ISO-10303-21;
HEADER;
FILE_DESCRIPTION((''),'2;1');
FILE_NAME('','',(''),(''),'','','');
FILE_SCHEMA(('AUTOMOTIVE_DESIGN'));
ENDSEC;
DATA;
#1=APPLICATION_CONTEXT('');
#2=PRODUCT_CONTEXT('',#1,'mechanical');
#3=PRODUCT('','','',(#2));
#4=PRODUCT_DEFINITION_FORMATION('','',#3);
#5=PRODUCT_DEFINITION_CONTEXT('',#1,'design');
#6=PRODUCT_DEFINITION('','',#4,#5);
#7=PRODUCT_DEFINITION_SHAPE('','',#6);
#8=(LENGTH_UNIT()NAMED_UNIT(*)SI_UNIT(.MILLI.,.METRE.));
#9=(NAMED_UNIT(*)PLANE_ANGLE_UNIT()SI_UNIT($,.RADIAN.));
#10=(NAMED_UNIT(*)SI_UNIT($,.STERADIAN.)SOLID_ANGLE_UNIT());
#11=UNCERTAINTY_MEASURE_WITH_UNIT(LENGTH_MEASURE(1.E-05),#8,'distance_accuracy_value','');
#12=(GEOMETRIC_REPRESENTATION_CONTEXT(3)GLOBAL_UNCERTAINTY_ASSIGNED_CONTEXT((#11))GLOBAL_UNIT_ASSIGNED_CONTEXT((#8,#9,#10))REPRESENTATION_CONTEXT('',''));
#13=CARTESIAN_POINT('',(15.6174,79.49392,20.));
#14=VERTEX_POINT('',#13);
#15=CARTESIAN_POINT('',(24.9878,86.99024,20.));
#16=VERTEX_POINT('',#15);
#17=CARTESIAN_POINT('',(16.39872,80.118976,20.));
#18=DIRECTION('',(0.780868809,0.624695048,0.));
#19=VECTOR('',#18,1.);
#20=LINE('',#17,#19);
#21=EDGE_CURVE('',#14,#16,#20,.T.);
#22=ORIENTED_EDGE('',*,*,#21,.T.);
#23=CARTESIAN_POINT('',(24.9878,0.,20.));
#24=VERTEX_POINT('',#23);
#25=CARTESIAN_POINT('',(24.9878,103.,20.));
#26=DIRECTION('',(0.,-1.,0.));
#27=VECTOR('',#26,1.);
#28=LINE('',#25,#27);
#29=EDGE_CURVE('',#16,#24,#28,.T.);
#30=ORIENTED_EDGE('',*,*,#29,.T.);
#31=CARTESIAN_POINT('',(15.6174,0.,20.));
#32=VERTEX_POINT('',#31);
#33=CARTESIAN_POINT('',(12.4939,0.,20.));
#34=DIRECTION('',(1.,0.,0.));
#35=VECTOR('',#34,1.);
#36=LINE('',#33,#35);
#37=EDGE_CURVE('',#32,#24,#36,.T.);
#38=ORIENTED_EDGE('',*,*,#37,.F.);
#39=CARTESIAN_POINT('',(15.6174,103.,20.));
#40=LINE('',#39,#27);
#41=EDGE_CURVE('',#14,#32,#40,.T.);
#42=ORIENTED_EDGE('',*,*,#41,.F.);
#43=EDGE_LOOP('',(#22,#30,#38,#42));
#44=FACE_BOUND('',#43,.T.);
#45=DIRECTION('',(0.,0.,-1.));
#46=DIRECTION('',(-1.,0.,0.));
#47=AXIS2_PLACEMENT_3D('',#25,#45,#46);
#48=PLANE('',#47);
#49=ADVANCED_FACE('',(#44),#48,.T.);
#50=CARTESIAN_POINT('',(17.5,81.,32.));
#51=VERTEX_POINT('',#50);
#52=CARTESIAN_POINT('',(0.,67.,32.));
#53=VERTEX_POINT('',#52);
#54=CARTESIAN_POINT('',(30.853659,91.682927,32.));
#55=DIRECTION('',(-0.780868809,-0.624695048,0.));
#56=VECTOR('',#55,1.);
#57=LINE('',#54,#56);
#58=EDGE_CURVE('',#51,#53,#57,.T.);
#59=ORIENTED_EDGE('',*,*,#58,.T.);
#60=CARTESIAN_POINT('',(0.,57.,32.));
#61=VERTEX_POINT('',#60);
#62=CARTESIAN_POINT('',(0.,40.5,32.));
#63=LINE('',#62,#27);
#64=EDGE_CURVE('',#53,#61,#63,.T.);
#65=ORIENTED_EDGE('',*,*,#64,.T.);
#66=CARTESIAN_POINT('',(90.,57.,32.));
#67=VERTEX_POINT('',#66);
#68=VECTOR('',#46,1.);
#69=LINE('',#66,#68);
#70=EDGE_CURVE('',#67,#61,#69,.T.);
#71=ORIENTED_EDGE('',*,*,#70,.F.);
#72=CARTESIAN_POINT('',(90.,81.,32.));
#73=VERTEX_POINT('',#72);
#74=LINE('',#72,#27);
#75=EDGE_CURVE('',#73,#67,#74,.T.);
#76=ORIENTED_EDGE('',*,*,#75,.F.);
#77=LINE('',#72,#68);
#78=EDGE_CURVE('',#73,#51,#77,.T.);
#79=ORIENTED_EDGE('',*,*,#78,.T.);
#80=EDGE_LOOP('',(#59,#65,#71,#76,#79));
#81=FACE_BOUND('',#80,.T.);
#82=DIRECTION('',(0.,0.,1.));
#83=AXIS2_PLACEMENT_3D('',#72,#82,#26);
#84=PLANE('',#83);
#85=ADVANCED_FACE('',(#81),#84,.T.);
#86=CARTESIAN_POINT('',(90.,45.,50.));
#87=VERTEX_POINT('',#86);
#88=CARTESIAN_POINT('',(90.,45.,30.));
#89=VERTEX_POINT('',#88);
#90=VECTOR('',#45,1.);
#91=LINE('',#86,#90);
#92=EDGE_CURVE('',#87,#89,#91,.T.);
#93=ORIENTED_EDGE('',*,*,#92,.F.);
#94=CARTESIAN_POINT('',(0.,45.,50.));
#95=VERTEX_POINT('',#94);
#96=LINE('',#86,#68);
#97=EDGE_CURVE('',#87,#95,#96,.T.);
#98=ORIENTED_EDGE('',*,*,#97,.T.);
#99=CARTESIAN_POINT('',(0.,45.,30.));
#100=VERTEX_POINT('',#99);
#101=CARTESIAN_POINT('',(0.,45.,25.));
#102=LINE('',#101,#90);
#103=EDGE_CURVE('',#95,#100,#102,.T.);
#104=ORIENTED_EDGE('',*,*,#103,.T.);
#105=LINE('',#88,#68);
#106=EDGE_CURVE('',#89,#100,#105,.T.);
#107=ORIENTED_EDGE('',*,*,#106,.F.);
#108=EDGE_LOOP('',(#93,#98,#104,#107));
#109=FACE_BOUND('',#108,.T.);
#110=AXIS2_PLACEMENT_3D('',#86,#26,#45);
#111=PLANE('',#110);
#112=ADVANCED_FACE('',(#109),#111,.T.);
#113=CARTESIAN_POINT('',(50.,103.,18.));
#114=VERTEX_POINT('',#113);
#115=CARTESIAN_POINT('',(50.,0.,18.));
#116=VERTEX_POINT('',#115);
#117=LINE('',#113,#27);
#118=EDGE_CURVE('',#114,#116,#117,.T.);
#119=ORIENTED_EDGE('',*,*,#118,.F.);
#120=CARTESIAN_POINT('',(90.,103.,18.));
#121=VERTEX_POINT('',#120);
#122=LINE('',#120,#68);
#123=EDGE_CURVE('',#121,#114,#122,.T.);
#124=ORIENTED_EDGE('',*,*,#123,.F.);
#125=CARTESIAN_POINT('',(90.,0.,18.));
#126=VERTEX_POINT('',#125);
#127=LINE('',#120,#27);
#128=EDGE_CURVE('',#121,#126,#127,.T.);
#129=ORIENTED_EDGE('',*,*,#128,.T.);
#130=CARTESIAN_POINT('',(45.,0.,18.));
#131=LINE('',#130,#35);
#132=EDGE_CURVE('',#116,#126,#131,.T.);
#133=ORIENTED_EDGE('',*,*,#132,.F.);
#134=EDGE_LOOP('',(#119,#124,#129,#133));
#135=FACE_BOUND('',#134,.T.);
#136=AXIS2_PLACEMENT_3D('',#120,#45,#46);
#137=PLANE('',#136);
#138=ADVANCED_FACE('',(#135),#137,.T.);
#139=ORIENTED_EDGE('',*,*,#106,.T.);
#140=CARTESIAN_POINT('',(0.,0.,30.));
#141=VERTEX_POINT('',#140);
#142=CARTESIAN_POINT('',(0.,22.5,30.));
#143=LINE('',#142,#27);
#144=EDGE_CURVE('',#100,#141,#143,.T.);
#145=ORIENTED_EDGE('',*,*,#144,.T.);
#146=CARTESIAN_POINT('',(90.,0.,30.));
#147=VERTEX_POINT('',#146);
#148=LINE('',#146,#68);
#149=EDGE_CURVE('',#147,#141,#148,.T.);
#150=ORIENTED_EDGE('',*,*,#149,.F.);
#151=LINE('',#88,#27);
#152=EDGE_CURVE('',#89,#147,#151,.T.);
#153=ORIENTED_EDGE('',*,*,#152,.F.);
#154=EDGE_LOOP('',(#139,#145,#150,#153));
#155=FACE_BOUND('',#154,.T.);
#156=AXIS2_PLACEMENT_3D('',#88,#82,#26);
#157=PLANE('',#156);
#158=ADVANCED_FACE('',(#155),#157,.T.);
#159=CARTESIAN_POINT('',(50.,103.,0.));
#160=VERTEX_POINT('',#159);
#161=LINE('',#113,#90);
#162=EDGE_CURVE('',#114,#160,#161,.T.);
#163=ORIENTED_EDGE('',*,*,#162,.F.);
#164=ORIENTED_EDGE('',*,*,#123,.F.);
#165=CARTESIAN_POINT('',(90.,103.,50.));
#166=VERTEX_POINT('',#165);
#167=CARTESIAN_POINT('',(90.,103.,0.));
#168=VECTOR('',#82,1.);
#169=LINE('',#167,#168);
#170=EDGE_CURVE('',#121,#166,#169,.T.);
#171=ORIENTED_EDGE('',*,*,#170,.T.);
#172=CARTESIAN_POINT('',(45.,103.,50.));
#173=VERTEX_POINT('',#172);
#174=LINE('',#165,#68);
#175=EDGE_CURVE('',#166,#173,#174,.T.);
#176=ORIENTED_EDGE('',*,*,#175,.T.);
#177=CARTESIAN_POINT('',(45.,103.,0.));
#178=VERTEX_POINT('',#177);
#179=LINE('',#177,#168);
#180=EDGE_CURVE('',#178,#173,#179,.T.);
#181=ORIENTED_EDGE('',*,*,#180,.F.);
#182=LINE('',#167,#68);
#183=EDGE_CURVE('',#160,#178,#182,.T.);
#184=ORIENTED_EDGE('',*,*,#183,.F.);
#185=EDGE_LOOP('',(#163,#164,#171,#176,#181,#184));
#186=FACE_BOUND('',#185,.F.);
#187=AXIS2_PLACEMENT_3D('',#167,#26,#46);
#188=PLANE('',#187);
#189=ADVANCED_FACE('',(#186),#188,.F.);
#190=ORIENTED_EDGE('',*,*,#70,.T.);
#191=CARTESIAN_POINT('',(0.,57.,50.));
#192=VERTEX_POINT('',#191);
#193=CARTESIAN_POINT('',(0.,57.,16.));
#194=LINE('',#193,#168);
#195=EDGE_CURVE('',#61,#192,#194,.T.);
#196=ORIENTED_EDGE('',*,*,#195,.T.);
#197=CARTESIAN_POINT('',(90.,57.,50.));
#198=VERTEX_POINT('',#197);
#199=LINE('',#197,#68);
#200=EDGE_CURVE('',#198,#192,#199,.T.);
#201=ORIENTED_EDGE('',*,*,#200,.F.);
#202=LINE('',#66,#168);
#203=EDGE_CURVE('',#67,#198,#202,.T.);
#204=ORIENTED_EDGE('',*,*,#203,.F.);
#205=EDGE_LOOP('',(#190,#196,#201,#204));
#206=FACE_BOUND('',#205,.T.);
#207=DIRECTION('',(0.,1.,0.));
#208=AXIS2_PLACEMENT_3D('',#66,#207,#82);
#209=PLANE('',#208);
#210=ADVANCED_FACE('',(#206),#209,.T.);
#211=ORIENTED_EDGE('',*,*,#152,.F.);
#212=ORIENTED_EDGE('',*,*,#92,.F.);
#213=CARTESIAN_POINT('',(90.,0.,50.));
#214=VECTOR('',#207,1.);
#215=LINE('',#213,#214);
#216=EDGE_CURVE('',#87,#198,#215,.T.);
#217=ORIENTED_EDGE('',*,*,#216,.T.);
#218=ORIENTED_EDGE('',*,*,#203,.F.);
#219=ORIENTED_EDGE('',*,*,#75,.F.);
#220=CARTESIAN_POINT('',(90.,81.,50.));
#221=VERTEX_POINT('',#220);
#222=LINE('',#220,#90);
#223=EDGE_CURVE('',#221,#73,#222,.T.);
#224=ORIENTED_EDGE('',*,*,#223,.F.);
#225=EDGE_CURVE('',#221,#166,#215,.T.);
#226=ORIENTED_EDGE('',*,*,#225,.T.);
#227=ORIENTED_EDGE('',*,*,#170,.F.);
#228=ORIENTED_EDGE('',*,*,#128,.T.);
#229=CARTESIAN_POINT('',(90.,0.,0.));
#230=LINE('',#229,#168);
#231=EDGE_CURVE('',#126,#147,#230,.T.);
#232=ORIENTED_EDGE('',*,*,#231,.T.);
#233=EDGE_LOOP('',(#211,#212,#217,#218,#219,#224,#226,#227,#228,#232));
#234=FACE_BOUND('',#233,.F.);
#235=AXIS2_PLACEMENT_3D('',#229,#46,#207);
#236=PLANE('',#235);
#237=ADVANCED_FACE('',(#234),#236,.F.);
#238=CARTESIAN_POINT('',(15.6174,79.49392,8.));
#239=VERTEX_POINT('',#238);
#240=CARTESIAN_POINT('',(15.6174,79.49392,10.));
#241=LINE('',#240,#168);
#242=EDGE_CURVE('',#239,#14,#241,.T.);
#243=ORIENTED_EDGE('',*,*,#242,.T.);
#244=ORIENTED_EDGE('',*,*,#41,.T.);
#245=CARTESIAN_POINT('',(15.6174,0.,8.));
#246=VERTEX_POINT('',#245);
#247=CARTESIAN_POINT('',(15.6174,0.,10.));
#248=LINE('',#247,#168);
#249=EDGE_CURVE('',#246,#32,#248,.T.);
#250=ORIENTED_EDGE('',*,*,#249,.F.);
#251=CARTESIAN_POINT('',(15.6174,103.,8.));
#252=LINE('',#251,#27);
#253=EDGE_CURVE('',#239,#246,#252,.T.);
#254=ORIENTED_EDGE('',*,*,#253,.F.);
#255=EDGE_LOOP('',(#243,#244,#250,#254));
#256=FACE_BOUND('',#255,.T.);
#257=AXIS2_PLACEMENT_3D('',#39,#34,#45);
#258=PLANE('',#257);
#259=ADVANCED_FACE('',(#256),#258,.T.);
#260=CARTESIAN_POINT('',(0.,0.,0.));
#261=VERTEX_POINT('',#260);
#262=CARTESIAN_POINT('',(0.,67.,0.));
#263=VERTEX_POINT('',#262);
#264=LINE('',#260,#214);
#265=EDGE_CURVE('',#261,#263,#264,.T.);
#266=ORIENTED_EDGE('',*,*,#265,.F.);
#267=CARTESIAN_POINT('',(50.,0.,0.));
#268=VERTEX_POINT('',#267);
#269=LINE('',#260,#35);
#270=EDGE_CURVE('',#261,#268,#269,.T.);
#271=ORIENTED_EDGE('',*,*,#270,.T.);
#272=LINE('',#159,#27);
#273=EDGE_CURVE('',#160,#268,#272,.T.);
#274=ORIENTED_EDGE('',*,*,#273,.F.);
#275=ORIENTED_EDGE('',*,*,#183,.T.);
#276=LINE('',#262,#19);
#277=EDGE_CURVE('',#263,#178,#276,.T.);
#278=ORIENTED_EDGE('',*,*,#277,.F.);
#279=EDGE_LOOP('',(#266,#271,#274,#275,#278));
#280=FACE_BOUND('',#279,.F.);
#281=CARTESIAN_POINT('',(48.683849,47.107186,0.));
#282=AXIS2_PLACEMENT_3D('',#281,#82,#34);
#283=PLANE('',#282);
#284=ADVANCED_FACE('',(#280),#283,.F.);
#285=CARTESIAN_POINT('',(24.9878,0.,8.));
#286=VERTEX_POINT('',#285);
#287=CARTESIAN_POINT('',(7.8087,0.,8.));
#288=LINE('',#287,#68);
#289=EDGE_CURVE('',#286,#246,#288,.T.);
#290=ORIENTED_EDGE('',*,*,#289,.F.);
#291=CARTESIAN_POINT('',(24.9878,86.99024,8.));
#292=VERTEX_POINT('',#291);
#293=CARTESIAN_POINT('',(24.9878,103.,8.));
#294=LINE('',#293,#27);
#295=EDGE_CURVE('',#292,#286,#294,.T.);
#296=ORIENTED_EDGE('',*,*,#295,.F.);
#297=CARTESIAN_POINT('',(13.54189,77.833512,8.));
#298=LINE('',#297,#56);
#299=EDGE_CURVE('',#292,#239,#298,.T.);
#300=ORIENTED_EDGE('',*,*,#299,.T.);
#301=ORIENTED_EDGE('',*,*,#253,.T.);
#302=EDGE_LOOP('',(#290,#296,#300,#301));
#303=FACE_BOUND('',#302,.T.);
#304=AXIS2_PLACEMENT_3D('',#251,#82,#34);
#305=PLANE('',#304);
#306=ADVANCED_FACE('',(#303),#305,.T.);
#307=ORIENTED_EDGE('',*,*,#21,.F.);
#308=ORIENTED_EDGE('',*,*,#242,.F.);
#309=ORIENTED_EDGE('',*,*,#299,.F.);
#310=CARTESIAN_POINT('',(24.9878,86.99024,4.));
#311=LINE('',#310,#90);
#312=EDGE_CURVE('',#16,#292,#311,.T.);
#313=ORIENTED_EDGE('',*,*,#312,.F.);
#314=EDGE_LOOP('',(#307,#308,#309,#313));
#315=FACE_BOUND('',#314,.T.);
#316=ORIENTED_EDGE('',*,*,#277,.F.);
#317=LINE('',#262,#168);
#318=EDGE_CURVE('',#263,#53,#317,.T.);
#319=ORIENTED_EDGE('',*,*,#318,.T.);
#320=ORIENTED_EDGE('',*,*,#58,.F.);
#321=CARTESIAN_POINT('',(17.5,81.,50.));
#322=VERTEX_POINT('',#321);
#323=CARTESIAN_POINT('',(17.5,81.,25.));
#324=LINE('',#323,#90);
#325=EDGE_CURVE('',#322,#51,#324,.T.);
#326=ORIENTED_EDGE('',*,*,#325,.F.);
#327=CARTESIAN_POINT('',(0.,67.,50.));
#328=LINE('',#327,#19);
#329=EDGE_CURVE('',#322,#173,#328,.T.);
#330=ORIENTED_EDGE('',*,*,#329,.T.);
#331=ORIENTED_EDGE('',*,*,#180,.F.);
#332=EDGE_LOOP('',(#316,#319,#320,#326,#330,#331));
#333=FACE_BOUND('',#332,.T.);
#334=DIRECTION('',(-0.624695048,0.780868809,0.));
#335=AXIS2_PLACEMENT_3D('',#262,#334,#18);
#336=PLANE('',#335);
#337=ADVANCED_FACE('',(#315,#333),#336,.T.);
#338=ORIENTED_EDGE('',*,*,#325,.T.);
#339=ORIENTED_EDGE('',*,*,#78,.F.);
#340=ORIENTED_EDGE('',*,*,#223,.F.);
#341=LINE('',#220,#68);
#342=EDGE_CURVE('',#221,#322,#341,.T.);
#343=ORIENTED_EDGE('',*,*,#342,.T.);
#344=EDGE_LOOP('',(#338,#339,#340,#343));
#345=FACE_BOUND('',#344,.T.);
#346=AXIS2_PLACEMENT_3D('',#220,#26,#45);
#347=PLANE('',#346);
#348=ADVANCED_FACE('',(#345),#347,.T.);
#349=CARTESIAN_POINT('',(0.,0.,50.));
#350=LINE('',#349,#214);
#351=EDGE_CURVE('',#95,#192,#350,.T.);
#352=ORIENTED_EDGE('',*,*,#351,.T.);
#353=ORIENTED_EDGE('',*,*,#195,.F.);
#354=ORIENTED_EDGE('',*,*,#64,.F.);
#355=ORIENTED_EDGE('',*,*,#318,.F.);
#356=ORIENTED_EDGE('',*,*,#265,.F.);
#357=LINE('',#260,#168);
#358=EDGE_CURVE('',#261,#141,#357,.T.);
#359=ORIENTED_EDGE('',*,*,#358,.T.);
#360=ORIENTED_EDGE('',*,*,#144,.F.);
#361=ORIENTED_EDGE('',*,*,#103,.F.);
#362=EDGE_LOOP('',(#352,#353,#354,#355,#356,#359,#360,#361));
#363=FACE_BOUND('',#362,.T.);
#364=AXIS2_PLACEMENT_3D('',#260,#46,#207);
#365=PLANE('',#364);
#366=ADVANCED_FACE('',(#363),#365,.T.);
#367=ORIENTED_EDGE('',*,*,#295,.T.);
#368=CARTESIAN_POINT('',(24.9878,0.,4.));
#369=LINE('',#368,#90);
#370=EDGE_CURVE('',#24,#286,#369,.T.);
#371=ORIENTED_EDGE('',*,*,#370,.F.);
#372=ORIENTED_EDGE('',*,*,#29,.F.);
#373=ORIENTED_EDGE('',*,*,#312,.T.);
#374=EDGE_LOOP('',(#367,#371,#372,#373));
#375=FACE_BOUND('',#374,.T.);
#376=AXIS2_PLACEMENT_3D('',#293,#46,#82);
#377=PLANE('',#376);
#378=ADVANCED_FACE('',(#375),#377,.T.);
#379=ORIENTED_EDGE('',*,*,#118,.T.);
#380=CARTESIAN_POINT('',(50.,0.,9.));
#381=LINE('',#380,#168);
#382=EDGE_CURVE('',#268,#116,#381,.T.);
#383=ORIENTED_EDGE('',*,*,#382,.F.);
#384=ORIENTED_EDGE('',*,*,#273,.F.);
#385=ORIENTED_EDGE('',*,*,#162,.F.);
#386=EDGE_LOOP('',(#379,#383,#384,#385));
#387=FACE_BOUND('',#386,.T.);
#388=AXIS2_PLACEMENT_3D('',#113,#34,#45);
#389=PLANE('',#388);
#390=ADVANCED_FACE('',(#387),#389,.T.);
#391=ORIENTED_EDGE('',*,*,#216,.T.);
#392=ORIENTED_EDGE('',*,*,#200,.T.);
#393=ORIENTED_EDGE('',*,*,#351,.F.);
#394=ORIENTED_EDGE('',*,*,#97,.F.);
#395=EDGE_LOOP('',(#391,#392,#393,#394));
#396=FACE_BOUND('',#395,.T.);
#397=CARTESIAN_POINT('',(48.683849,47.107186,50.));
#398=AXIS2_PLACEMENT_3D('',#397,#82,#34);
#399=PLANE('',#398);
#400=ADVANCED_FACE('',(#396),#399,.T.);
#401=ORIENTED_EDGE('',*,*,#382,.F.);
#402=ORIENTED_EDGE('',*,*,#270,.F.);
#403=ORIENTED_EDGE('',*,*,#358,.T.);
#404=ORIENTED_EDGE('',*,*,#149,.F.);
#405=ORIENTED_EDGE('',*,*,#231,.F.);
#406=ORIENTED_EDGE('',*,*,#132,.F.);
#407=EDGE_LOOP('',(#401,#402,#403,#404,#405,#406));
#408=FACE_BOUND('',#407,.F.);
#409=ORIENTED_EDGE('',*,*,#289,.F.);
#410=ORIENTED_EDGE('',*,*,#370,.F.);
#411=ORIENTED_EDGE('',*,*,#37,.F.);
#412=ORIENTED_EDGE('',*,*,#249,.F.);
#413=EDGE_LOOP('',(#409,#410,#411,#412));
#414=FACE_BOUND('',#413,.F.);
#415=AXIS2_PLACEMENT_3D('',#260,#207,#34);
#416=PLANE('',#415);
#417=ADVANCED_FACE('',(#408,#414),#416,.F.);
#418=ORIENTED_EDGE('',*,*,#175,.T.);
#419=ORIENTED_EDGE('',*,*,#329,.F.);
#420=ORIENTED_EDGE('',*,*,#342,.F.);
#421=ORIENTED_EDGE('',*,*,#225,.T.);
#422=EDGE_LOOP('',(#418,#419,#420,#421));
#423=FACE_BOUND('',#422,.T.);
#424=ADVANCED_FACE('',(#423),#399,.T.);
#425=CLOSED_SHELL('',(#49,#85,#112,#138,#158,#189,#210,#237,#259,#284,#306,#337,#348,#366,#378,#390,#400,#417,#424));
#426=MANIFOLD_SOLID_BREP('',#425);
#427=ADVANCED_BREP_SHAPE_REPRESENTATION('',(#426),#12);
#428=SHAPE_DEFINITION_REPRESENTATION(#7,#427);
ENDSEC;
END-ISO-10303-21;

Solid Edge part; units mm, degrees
sketch "Sketch1" plane through (0, 0, 0) normal (0, 0, 1) x (1, 0, 0)
  line L0 (90, 0) -> (90, 103)
  line L1 (90, 103) -> (45, 103)
  line L2 (0, 67) -> (45, 103)
  line L3 (0, 0) -> (0, 67)
  line L4 (0, 0) -> (90, 0)
extrude "Protrusion1" add sketch "Sketch1" along normal blind 50
sketch "Sketch2" plane through (90, 51.5, 25) normal (1, 0, 0) x (0, 1, 0)
  line L0 (5.5, 7) -> (5.5, 25)
  line L1 (29.5, 7) -> (5.5, 7)
  line L2 (29.5, 25) -> (29.5, 7)
extrude "Cutout1" cut sketch "Sketch2" against normal up to next material side at (90, 57.05, 41)
sketch "Sketch3" plane through (67.5, 103, 25) normal (0, 1, 0) x (0, 0, -1)
  line L0 (7, -22.5) -> (7, 17.5)
  line L1 (7, 17.5) -> (25, 17.5)
extrude "Cutout2" cut sketch "Sketch3" against normal up to next material side at (70, 103, 17.95)
sketch "Sketch4" plane through (67.5, 103, 25) normal (0, 1, 0) x (1, 0, 0)
  line L0 (-42.5122, 5) -> (-51.8826, 5)
  line L1 (-51.8826, 5) -> (-51.8826, 17)
  line L2 (-51.8826, 17) -> (-42.5122, 17)
  line L3 (-42.5122, 17) -> (-42.5122, 5)
extrude "Cutout3" cut sketch "Sketch4" against normal up to next
sketch "Sketch5" plane through (90, 51.5, 25) normal (1, 0, 0) x (0, 1, 0)
  line L0 (-6.5, 5) -> (-51.5, 5)
  line L1 (-6.5, 25) -> (-6.5, 5)
extrude "Cutout4" cut sketch "Sketch5" against normal up to next material side at (90, 22.5, 30.05)
